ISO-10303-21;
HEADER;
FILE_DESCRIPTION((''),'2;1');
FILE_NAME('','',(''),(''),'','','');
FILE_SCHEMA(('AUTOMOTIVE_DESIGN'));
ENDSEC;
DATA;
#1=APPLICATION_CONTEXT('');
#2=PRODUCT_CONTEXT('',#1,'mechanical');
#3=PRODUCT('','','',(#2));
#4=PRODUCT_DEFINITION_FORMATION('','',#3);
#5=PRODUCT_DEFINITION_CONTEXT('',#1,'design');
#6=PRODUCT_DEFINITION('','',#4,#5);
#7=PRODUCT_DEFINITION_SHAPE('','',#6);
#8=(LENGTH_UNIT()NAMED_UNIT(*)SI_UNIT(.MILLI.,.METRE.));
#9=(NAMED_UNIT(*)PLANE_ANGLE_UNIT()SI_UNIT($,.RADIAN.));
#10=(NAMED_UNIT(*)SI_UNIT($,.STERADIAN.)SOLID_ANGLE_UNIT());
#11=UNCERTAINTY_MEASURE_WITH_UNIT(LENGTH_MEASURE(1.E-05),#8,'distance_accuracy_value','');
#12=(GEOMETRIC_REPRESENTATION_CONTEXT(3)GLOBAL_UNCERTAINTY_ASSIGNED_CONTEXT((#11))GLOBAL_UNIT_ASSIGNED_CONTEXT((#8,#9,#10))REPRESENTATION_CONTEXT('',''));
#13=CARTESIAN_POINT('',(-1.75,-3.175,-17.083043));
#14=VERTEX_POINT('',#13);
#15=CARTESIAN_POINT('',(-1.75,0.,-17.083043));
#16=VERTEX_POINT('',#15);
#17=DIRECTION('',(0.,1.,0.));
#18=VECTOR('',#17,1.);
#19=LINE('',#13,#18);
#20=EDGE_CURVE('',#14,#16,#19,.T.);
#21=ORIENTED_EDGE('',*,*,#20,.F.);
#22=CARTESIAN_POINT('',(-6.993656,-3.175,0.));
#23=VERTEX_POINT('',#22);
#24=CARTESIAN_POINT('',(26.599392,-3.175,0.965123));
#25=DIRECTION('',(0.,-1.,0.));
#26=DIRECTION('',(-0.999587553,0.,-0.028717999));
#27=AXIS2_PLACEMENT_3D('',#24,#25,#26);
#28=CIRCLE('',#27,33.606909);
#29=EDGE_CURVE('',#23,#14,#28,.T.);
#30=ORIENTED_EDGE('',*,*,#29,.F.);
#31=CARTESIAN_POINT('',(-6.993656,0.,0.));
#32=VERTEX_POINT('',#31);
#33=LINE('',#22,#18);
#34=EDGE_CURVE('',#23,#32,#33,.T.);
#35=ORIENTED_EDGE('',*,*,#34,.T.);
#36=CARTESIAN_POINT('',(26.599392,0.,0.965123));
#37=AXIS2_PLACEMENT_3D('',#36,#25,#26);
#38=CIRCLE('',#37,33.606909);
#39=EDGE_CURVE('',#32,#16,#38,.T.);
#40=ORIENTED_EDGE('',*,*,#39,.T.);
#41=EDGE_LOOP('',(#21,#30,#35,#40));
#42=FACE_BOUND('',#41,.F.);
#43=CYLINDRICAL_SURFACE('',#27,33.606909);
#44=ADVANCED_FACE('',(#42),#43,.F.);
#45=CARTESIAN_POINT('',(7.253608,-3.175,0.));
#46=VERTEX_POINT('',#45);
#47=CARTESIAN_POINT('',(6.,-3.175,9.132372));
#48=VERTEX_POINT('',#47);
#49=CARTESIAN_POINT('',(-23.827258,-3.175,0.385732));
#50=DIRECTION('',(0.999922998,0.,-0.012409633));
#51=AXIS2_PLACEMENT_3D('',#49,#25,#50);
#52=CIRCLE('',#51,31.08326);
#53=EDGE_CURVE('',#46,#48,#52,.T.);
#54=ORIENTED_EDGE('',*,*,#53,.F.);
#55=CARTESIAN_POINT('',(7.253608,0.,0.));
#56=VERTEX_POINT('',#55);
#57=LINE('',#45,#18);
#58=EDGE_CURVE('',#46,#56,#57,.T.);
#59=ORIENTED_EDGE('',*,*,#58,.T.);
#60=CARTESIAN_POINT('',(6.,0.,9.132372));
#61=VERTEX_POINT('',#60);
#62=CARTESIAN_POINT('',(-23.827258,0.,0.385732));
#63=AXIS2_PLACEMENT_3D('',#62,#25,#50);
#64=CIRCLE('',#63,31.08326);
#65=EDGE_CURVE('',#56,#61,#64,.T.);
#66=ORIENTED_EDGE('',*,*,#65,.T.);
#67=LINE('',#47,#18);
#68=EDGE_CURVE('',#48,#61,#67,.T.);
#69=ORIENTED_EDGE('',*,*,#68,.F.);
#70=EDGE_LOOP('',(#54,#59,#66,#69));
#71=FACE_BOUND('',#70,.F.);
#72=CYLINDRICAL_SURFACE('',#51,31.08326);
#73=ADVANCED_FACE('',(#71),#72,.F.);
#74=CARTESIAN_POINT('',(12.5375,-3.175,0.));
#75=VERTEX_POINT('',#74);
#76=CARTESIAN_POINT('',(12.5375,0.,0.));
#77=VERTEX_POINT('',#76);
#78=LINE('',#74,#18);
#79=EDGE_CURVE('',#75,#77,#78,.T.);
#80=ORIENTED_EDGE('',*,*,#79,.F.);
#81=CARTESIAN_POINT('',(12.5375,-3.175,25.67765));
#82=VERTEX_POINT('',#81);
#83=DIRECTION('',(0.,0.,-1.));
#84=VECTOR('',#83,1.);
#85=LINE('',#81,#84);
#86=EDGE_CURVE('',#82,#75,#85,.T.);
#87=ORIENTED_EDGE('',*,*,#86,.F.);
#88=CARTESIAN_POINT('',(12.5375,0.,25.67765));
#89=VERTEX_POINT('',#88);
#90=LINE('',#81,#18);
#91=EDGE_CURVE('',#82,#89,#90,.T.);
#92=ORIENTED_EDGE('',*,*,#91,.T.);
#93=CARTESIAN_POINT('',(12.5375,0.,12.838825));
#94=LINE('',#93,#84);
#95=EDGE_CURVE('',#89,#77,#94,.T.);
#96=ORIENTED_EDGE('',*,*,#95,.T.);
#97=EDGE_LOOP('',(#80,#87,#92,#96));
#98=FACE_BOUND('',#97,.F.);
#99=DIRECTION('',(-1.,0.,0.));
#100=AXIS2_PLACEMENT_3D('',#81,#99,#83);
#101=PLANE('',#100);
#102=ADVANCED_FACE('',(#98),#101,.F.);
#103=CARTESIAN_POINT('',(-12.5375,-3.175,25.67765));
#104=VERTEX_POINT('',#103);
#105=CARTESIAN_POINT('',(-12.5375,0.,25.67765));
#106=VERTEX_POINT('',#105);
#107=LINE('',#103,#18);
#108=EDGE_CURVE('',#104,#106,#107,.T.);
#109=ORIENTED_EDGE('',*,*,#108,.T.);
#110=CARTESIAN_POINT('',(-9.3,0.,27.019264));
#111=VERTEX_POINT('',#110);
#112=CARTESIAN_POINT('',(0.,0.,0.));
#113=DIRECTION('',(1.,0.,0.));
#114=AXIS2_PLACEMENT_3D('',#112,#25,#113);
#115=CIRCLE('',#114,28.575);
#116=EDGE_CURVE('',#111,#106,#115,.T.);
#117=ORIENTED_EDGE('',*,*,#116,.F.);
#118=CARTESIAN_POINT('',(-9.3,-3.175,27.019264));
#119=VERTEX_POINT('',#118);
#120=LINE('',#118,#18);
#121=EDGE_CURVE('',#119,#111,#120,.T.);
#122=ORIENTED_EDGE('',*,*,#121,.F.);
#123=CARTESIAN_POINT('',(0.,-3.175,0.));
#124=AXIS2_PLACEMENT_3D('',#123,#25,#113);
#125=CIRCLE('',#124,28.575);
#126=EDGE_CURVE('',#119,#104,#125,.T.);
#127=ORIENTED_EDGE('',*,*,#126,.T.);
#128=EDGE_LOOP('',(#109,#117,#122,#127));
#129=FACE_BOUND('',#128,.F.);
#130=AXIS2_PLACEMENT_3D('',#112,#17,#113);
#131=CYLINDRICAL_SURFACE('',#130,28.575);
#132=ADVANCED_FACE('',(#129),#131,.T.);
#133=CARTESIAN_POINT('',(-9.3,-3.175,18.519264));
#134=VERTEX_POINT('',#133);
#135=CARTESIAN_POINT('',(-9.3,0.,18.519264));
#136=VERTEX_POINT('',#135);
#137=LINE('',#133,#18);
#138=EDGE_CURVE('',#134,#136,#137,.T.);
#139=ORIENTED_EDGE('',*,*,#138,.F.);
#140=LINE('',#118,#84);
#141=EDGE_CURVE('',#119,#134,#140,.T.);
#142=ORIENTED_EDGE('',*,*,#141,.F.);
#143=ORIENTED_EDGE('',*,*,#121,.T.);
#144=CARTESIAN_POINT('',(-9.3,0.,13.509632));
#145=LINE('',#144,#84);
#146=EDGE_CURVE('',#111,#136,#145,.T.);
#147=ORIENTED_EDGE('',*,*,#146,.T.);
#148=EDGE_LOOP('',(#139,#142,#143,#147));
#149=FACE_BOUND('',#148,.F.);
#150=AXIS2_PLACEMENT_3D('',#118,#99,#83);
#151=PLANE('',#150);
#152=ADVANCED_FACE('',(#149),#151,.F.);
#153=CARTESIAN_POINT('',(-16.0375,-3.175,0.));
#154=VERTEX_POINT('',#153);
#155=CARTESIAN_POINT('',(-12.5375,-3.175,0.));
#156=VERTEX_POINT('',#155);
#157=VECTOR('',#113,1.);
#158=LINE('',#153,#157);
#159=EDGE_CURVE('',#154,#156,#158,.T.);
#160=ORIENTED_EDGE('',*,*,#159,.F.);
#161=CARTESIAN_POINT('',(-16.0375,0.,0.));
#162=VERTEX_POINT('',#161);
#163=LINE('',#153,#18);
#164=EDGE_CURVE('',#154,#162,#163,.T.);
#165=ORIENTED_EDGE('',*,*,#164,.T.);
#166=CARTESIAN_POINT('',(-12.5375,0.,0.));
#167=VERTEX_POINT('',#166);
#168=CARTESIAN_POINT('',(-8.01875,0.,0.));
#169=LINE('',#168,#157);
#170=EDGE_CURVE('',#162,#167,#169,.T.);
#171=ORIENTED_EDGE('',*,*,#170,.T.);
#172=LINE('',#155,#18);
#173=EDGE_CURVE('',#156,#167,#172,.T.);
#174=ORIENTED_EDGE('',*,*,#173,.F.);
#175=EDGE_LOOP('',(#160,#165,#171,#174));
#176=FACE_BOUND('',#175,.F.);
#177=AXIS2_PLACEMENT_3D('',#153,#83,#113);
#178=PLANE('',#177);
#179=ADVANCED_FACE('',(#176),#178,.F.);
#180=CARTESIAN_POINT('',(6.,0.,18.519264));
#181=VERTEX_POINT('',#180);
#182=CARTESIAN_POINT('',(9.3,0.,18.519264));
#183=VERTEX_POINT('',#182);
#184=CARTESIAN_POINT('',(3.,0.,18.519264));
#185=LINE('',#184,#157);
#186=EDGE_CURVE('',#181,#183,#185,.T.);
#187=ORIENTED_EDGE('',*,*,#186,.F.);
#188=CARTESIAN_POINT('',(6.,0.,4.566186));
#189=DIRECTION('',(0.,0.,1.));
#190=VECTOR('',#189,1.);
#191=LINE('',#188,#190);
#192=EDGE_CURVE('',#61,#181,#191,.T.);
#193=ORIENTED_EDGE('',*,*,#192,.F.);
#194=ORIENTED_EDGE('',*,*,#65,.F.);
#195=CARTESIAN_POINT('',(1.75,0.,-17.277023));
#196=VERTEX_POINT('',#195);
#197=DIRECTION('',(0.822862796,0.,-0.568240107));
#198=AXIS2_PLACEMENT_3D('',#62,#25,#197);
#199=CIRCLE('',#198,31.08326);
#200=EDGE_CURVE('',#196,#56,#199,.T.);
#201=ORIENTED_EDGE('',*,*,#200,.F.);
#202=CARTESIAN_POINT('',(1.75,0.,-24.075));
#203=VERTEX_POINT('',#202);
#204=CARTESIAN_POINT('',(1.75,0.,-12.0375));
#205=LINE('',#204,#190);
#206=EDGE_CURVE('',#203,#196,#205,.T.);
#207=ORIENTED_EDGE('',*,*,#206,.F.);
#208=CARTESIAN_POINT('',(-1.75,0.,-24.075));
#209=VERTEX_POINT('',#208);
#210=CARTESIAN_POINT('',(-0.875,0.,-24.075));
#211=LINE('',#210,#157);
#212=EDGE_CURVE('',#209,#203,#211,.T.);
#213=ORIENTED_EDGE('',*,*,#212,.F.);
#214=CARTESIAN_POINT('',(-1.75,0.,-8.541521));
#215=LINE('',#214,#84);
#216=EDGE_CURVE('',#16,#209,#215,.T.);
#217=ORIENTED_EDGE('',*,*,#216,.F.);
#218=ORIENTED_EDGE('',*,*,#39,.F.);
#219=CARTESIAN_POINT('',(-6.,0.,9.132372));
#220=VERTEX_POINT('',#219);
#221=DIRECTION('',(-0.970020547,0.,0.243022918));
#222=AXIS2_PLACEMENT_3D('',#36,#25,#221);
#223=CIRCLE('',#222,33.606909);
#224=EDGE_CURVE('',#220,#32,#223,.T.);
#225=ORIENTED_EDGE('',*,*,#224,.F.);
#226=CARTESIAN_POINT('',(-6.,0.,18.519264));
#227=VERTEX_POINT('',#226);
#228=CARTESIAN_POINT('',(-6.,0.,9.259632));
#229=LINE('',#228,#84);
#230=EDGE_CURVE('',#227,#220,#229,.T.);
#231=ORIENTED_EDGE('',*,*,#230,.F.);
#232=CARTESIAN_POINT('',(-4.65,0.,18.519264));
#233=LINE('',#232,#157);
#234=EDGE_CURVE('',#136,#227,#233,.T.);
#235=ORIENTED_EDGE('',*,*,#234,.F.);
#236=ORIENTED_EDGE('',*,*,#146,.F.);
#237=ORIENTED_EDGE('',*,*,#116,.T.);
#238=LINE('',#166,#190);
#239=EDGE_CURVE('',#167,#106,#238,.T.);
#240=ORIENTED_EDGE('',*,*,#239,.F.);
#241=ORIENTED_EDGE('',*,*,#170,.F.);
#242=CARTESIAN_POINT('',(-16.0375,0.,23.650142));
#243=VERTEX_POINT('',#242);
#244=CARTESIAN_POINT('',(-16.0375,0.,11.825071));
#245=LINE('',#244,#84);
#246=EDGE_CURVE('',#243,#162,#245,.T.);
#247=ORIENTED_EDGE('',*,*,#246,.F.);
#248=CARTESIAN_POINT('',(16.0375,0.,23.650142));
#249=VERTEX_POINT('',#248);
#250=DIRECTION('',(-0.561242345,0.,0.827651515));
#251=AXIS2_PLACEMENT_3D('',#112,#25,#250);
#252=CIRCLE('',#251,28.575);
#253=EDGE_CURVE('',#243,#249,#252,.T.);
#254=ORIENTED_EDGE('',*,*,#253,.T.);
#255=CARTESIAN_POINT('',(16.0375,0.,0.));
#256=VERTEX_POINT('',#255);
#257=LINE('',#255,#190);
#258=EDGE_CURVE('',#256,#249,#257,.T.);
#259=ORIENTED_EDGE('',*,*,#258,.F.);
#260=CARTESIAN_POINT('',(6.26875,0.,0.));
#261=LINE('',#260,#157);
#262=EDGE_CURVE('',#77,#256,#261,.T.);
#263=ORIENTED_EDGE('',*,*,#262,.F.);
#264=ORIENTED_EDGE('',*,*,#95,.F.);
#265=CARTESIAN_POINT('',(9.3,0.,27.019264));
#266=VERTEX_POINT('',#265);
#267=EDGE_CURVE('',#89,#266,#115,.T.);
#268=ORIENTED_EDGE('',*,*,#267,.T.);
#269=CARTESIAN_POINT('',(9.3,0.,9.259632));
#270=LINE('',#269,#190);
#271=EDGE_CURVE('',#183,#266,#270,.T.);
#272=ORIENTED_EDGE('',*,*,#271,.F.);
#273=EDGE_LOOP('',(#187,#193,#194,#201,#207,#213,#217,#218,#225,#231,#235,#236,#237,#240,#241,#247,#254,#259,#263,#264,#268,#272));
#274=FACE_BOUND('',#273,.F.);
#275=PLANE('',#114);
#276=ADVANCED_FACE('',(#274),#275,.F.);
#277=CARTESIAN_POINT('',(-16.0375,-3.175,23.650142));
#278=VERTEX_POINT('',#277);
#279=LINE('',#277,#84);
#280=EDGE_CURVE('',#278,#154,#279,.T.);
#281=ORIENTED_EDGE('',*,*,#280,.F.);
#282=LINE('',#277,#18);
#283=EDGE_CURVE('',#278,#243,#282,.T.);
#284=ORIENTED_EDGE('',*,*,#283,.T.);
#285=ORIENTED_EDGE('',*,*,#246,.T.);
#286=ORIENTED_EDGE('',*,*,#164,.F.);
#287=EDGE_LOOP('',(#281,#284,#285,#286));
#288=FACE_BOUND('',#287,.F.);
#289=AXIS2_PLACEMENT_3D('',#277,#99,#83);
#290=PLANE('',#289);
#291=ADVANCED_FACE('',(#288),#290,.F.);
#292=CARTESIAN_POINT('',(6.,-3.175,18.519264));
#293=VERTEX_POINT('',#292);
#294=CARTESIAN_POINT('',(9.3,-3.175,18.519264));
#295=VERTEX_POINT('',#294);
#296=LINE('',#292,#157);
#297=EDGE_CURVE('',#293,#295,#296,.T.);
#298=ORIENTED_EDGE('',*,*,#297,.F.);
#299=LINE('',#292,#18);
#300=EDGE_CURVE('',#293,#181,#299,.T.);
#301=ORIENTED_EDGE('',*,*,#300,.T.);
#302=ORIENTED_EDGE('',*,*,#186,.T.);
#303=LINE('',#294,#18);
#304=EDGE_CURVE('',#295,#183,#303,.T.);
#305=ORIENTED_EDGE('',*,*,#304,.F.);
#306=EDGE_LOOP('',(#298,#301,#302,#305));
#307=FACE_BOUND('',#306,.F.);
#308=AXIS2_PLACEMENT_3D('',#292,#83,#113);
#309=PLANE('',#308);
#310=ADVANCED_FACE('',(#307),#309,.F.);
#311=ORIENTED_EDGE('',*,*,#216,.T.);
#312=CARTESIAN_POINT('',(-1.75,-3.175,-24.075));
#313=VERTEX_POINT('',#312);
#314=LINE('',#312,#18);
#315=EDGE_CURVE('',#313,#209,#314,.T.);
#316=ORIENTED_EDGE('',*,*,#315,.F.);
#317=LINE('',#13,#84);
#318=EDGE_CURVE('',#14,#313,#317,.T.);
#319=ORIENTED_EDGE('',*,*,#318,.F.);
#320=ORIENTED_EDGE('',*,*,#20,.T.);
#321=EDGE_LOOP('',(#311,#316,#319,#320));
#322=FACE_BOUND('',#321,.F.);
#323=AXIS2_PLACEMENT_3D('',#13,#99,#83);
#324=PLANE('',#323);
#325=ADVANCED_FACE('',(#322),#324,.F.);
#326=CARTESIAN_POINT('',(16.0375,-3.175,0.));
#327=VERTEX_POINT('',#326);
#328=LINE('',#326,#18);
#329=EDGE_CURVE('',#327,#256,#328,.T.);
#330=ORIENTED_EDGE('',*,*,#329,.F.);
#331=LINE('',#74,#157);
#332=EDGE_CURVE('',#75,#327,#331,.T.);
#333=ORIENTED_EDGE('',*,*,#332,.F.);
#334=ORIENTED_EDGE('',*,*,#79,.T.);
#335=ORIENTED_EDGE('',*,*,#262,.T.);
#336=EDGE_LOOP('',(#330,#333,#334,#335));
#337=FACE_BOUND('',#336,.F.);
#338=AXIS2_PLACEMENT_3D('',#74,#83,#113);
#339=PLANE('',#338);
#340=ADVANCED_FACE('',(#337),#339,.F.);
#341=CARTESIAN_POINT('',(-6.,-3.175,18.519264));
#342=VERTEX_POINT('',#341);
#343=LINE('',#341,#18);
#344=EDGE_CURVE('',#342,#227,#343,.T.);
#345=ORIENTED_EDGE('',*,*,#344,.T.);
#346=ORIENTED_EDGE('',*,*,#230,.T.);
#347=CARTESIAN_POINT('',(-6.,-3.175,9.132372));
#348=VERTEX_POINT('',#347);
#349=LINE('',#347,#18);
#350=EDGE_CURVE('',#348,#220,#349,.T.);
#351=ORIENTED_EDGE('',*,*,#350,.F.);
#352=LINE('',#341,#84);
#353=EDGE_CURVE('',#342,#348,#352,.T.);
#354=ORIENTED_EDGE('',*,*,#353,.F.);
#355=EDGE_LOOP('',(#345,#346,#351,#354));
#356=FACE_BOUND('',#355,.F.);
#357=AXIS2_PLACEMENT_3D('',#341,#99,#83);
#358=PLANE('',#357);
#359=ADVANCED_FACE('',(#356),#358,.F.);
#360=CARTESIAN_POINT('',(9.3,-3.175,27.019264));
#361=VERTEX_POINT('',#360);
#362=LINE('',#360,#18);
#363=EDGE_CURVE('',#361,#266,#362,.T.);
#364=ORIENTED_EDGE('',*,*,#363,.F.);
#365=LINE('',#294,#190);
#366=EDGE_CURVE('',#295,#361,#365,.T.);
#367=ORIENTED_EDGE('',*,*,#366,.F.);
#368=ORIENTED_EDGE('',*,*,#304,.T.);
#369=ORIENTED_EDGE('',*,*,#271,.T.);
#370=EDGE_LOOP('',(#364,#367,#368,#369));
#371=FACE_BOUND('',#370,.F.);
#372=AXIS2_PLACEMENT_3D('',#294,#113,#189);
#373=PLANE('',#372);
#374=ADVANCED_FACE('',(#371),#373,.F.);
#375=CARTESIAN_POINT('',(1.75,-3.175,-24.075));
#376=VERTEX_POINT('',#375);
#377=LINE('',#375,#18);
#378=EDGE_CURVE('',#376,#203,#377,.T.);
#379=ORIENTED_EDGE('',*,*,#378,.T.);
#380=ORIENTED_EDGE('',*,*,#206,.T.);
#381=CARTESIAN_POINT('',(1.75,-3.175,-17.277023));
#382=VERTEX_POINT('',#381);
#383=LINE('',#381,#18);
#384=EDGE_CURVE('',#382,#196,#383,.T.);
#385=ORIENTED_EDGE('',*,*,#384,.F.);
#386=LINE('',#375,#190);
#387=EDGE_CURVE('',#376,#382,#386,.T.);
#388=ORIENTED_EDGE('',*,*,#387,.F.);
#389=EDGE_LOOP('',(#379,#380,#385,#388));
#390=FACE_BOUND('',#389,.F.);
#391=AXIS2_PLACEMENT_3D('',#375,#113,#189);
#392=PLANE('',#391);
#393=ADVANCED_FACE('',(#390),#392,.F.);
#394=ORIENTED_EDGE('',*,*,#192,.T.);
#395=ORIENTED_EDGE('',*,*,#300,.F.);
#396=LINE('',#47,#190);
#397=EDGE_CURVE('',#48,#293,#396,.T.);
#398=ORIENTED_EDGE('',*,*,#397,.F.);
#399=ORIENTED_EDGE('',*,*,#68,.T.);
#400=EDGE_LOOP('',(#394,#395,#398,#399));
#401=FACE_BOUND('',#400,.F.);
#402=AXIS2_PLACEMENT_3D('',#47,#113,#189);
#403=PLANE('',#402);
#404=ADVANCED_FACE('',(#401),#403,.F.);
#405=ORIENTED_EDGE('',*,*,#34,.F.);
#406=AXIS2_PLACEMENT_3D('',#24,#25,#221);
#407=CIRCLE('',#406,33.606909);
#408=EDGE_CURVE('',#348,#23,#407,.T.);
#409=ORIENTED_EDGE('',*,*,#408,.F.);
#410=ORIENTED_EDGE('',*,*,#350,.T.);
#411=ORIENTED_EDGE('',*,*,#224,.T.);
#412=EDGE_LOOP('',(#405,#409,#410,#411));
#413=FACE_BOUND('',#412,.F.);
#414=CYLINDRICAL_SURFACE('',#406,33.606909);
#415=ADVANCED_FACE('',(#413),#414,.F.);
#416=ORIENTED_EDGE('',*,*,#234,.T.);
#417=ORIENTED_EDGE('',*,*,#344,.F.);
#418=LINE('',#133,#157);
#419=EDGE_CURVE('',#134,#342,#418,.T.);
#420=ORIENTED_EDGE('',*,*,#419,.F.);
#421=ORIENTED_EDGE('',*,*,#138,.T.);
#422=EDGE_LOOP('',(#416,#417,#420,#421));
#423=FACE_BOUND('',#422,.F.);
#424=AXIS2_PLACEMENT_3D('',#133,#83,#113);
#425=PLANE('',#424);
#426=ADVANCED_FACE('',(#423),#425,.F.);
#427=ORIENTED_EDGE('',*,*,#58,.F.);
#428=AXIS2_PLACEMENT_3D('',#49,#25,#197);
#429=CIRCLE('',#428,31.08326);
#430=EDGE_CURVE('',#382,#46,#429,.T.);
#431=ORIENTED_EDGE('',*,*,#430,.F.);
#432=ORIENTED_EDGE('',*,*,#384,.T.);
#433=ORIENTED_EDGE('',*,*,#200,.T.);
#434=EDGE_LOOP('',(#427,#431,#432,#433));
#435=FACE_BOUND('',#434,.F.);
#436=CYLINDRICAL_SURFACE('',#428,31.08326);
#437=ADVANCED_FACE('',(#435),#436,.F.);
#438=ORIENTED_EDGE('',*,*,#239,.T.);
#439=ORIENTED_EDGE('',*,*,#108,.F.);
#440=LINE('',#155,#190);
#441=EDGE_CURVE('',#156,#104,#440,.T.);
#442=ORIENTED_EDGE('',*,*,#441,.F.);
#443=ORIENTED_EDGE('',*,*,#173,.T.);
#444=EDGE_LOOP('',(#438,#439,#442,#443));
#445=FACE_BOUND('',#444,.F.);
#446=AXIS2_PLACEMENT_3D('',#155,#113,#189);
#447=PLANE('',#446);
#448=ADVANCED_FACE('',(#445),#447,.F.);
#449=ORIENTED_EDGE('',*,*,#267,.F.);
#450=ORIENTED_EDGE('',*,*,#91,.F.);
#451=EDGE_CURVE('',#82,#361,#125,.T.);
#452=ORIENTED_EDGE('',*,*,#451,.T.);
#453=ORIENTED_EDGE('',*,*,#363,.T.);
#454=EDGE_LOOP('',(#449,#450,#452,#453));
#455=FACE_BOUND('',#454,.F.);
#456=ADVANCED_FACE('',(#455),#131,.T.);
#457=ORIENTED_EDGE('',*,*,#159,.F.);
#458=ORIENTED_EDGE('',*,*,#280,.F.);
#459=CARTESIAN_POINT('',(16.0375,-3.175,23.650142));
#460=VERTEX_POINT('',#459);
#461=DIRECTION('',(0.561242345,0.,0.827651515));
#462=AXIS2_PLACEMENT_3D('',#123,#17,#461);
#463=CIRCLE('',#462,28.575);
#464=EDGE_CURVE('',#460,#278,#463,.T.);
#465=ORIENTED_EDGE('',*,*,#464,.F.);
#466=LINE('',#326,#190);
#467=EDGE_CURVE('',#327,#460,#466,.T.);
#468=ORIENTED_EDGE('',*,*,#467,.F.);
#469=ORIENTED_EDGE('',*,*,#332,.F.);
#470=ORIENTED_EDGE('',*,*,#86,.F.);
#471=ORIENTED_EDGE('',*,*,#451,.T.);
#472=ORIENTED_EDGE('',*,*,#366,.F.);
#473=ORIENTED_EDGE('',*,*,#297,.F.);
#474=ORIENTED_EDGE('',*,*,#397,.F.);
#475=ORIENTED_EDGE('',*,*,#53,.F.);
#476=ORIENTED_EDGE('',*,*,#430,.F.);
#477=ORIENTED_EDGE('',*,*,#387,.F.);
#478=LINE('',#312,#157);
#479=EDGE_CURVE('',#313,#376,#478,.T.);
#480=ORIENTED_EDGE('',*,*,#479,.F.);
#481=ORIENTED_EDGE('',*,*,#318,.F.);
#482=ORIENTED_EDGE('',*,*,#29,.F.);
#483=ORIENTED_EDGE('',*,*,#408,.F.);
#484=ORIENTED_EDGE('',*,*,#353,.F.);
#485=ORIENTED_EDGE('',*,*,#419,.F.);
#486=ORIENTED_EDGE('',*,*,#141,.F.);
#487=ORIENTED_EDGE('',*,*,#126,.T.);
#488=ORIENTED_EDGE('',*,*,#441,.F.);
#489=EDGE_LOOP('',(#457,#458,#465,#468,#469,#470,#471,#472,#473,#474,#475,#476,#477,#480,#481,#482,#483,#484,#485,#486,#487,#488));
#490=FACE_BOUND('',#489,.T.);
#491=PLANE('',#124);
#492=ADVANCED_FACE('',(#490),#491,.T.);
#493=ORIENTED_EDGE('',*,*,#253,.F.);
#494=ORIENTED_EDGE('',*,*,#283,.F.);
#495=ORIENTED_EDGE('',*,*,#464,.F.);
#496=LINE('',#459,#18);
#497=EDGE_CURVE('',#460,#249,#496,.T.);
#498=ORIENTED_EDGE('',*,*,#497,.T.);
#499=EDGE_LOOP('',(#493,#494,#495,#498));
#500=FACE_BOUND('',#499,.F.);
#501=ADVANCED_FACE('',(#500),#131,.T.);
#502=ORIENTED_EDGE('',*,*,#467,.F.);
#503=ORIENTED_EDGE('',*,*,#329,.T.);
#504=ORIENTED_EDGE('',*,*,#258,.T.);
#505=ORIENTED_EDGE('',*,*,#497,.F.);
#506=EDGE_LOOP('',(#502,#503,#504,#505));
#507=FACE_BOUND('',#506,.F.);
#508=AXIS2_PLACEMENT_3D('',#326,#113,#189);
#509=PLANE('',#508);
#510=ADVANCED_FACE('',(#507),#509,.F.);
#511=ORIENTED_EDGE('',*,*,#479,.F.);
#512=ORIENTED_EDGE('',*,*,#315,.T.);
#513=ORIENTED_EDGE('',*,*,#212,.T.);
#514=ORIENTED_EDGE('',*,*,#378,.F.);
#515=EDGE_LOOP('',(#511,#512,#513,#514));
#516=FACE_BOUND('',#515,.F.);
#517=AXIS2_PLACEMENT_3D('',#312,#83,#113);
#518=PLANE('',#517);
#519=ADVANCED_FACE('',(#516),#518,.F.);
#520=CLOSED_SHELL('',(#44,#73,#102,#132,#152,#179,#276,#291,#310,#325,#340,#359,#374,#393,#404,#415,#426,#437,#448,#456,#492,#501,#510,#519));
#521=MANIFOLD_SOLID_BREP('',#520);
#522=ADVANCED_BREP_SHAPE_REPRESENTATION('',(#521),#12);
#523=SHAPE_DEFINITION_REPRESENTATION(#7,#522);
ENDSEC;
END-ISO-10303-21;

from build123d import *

# Parameters (mm, degrees)
F0_R     = 28.575
F1_DEPTH = 3.175
F3_DEPTH = 3.176


# Not quite as in the source:
# - a length typed as a fraction of an inch, garbled in the dataset ("3 / 203.2 mm" for 3/8 in), is restored


with BuildPart() as f1:
    # F0 (on Front) → F1 (new body)
    with BuildSketch(Plane.XZ):
        Circle(F0_R)
    extrude(amount=F1_DEPTH)

    # F2 (on face) → F3 (cut, through all)
    with BuildSketch(Plane.XZ.offset(3.175)):
        with BuildLine():
            Line((-1.75, -17.08304261), (-1.75, -24.075))
            Line((-1.75, -24.075), (0, -24.075))
            Line((0, -24.075), (0, -19.575))
            ThreePointArc((0, -19.575), (-0.9032383957, -18.3488519781), (-1.75, -17.08304261))
        make_face()
        with BuildLine():
            Line((0, -19.575), (0, -24.075))
            Line((0, -24.075), (1.75, -24.075))
            Line((1.75, -24.075), (1.75, -17.2770230976))
            ThreePointArc((1.75, -17.2770230976), (0.9017072988, -18.4463502097), (0, -19.575))
        make_face()
        with BuildLine():
            ThreePointArc((-6.9936556862, 0), (-5.528073584, -8.8964320017), (-1.75, -17.08304261))
            ThreePointArc((-1.75, -17.08304261), (-0.9032383957, -18.3488519781), (0, -19.575))
            Line((0, -19.575), (0, 0))
            Line((0, 0), (-6.9936556862, 0))
        make_face()
        with BuildLine():
            Line((0, 0), (0, -19.575))
            ThreePointArc((0, -19.575), (0.9017072988, -18.4463502097), (1.75, -17.2770230976))
            ThreePointArc((1.75, -17.2770230976), (5.789623043, -9.0487471984), (7.2536082684, 0))
            Line((7.2536082684, 0), (0, 0))
        make_face()
        with BuildLine():
            ThreePointArc((-6, 9.1323722154), (-6.8103344804, 4.6002974695), (-6.9936556862, 0))
            Line((-6.9936556862, 0), (0, 0))
            Line((0, 0), (7.2536082684, 0))
            ThreePointArc((7.2536082684, 0), (6.9672213091, 4.6129154541), (6, 9.1323722154))
            Line((6, 9.1323722154), (6, 18.5192639611))
            Line((6, 18.5192639611), (9.3, 18.5192639611))
            Line((9.3, 18.5192639611), (9.3, 27.0192639611))
            ThreePointArc((9.3, 27.0192639611), (0, 28.575), (-9.3, 27.0192639611))
            Line((-9.3, 27.0192639611), (-9.3, 18.5192639611))
            Line((-9.3, 18.5192639611), (-6, 18.5192639611))
            Line((-6, 18.5192639611), (-6, 9.1323722154))
        make_face()
        with BuildLine():
            Line((12.5375, 0), (16.0375, 0))
            Line((16.0375, 0), (16.0375, 23.650142045))
            ThreePointArc((16.0375, 23.650142045), (14.3234197578, 24.7259028438), (12.5375, 25.6776501797))
            Line((12.5375, 25.6776501797), (12.5375, 0))
        make_face()
        with BuildLine():
            Line((-16.0375, 0), (-12.5375, 0))
            Line((-12.5375, 0), (-12.5375, 25.6776501797))
            ThreePointArc((-12.5375, 25.6776501797), (-14.3234197578, 24.7259028438), (-16.0375, 23.650142045))
            Line((-16.0375, 23.650142045), (-16.0375, 0))
        make_face()
    extrude(amount=-F3_DEPTH, mode=Mode.SUBTRACT)


solid = f1.part
